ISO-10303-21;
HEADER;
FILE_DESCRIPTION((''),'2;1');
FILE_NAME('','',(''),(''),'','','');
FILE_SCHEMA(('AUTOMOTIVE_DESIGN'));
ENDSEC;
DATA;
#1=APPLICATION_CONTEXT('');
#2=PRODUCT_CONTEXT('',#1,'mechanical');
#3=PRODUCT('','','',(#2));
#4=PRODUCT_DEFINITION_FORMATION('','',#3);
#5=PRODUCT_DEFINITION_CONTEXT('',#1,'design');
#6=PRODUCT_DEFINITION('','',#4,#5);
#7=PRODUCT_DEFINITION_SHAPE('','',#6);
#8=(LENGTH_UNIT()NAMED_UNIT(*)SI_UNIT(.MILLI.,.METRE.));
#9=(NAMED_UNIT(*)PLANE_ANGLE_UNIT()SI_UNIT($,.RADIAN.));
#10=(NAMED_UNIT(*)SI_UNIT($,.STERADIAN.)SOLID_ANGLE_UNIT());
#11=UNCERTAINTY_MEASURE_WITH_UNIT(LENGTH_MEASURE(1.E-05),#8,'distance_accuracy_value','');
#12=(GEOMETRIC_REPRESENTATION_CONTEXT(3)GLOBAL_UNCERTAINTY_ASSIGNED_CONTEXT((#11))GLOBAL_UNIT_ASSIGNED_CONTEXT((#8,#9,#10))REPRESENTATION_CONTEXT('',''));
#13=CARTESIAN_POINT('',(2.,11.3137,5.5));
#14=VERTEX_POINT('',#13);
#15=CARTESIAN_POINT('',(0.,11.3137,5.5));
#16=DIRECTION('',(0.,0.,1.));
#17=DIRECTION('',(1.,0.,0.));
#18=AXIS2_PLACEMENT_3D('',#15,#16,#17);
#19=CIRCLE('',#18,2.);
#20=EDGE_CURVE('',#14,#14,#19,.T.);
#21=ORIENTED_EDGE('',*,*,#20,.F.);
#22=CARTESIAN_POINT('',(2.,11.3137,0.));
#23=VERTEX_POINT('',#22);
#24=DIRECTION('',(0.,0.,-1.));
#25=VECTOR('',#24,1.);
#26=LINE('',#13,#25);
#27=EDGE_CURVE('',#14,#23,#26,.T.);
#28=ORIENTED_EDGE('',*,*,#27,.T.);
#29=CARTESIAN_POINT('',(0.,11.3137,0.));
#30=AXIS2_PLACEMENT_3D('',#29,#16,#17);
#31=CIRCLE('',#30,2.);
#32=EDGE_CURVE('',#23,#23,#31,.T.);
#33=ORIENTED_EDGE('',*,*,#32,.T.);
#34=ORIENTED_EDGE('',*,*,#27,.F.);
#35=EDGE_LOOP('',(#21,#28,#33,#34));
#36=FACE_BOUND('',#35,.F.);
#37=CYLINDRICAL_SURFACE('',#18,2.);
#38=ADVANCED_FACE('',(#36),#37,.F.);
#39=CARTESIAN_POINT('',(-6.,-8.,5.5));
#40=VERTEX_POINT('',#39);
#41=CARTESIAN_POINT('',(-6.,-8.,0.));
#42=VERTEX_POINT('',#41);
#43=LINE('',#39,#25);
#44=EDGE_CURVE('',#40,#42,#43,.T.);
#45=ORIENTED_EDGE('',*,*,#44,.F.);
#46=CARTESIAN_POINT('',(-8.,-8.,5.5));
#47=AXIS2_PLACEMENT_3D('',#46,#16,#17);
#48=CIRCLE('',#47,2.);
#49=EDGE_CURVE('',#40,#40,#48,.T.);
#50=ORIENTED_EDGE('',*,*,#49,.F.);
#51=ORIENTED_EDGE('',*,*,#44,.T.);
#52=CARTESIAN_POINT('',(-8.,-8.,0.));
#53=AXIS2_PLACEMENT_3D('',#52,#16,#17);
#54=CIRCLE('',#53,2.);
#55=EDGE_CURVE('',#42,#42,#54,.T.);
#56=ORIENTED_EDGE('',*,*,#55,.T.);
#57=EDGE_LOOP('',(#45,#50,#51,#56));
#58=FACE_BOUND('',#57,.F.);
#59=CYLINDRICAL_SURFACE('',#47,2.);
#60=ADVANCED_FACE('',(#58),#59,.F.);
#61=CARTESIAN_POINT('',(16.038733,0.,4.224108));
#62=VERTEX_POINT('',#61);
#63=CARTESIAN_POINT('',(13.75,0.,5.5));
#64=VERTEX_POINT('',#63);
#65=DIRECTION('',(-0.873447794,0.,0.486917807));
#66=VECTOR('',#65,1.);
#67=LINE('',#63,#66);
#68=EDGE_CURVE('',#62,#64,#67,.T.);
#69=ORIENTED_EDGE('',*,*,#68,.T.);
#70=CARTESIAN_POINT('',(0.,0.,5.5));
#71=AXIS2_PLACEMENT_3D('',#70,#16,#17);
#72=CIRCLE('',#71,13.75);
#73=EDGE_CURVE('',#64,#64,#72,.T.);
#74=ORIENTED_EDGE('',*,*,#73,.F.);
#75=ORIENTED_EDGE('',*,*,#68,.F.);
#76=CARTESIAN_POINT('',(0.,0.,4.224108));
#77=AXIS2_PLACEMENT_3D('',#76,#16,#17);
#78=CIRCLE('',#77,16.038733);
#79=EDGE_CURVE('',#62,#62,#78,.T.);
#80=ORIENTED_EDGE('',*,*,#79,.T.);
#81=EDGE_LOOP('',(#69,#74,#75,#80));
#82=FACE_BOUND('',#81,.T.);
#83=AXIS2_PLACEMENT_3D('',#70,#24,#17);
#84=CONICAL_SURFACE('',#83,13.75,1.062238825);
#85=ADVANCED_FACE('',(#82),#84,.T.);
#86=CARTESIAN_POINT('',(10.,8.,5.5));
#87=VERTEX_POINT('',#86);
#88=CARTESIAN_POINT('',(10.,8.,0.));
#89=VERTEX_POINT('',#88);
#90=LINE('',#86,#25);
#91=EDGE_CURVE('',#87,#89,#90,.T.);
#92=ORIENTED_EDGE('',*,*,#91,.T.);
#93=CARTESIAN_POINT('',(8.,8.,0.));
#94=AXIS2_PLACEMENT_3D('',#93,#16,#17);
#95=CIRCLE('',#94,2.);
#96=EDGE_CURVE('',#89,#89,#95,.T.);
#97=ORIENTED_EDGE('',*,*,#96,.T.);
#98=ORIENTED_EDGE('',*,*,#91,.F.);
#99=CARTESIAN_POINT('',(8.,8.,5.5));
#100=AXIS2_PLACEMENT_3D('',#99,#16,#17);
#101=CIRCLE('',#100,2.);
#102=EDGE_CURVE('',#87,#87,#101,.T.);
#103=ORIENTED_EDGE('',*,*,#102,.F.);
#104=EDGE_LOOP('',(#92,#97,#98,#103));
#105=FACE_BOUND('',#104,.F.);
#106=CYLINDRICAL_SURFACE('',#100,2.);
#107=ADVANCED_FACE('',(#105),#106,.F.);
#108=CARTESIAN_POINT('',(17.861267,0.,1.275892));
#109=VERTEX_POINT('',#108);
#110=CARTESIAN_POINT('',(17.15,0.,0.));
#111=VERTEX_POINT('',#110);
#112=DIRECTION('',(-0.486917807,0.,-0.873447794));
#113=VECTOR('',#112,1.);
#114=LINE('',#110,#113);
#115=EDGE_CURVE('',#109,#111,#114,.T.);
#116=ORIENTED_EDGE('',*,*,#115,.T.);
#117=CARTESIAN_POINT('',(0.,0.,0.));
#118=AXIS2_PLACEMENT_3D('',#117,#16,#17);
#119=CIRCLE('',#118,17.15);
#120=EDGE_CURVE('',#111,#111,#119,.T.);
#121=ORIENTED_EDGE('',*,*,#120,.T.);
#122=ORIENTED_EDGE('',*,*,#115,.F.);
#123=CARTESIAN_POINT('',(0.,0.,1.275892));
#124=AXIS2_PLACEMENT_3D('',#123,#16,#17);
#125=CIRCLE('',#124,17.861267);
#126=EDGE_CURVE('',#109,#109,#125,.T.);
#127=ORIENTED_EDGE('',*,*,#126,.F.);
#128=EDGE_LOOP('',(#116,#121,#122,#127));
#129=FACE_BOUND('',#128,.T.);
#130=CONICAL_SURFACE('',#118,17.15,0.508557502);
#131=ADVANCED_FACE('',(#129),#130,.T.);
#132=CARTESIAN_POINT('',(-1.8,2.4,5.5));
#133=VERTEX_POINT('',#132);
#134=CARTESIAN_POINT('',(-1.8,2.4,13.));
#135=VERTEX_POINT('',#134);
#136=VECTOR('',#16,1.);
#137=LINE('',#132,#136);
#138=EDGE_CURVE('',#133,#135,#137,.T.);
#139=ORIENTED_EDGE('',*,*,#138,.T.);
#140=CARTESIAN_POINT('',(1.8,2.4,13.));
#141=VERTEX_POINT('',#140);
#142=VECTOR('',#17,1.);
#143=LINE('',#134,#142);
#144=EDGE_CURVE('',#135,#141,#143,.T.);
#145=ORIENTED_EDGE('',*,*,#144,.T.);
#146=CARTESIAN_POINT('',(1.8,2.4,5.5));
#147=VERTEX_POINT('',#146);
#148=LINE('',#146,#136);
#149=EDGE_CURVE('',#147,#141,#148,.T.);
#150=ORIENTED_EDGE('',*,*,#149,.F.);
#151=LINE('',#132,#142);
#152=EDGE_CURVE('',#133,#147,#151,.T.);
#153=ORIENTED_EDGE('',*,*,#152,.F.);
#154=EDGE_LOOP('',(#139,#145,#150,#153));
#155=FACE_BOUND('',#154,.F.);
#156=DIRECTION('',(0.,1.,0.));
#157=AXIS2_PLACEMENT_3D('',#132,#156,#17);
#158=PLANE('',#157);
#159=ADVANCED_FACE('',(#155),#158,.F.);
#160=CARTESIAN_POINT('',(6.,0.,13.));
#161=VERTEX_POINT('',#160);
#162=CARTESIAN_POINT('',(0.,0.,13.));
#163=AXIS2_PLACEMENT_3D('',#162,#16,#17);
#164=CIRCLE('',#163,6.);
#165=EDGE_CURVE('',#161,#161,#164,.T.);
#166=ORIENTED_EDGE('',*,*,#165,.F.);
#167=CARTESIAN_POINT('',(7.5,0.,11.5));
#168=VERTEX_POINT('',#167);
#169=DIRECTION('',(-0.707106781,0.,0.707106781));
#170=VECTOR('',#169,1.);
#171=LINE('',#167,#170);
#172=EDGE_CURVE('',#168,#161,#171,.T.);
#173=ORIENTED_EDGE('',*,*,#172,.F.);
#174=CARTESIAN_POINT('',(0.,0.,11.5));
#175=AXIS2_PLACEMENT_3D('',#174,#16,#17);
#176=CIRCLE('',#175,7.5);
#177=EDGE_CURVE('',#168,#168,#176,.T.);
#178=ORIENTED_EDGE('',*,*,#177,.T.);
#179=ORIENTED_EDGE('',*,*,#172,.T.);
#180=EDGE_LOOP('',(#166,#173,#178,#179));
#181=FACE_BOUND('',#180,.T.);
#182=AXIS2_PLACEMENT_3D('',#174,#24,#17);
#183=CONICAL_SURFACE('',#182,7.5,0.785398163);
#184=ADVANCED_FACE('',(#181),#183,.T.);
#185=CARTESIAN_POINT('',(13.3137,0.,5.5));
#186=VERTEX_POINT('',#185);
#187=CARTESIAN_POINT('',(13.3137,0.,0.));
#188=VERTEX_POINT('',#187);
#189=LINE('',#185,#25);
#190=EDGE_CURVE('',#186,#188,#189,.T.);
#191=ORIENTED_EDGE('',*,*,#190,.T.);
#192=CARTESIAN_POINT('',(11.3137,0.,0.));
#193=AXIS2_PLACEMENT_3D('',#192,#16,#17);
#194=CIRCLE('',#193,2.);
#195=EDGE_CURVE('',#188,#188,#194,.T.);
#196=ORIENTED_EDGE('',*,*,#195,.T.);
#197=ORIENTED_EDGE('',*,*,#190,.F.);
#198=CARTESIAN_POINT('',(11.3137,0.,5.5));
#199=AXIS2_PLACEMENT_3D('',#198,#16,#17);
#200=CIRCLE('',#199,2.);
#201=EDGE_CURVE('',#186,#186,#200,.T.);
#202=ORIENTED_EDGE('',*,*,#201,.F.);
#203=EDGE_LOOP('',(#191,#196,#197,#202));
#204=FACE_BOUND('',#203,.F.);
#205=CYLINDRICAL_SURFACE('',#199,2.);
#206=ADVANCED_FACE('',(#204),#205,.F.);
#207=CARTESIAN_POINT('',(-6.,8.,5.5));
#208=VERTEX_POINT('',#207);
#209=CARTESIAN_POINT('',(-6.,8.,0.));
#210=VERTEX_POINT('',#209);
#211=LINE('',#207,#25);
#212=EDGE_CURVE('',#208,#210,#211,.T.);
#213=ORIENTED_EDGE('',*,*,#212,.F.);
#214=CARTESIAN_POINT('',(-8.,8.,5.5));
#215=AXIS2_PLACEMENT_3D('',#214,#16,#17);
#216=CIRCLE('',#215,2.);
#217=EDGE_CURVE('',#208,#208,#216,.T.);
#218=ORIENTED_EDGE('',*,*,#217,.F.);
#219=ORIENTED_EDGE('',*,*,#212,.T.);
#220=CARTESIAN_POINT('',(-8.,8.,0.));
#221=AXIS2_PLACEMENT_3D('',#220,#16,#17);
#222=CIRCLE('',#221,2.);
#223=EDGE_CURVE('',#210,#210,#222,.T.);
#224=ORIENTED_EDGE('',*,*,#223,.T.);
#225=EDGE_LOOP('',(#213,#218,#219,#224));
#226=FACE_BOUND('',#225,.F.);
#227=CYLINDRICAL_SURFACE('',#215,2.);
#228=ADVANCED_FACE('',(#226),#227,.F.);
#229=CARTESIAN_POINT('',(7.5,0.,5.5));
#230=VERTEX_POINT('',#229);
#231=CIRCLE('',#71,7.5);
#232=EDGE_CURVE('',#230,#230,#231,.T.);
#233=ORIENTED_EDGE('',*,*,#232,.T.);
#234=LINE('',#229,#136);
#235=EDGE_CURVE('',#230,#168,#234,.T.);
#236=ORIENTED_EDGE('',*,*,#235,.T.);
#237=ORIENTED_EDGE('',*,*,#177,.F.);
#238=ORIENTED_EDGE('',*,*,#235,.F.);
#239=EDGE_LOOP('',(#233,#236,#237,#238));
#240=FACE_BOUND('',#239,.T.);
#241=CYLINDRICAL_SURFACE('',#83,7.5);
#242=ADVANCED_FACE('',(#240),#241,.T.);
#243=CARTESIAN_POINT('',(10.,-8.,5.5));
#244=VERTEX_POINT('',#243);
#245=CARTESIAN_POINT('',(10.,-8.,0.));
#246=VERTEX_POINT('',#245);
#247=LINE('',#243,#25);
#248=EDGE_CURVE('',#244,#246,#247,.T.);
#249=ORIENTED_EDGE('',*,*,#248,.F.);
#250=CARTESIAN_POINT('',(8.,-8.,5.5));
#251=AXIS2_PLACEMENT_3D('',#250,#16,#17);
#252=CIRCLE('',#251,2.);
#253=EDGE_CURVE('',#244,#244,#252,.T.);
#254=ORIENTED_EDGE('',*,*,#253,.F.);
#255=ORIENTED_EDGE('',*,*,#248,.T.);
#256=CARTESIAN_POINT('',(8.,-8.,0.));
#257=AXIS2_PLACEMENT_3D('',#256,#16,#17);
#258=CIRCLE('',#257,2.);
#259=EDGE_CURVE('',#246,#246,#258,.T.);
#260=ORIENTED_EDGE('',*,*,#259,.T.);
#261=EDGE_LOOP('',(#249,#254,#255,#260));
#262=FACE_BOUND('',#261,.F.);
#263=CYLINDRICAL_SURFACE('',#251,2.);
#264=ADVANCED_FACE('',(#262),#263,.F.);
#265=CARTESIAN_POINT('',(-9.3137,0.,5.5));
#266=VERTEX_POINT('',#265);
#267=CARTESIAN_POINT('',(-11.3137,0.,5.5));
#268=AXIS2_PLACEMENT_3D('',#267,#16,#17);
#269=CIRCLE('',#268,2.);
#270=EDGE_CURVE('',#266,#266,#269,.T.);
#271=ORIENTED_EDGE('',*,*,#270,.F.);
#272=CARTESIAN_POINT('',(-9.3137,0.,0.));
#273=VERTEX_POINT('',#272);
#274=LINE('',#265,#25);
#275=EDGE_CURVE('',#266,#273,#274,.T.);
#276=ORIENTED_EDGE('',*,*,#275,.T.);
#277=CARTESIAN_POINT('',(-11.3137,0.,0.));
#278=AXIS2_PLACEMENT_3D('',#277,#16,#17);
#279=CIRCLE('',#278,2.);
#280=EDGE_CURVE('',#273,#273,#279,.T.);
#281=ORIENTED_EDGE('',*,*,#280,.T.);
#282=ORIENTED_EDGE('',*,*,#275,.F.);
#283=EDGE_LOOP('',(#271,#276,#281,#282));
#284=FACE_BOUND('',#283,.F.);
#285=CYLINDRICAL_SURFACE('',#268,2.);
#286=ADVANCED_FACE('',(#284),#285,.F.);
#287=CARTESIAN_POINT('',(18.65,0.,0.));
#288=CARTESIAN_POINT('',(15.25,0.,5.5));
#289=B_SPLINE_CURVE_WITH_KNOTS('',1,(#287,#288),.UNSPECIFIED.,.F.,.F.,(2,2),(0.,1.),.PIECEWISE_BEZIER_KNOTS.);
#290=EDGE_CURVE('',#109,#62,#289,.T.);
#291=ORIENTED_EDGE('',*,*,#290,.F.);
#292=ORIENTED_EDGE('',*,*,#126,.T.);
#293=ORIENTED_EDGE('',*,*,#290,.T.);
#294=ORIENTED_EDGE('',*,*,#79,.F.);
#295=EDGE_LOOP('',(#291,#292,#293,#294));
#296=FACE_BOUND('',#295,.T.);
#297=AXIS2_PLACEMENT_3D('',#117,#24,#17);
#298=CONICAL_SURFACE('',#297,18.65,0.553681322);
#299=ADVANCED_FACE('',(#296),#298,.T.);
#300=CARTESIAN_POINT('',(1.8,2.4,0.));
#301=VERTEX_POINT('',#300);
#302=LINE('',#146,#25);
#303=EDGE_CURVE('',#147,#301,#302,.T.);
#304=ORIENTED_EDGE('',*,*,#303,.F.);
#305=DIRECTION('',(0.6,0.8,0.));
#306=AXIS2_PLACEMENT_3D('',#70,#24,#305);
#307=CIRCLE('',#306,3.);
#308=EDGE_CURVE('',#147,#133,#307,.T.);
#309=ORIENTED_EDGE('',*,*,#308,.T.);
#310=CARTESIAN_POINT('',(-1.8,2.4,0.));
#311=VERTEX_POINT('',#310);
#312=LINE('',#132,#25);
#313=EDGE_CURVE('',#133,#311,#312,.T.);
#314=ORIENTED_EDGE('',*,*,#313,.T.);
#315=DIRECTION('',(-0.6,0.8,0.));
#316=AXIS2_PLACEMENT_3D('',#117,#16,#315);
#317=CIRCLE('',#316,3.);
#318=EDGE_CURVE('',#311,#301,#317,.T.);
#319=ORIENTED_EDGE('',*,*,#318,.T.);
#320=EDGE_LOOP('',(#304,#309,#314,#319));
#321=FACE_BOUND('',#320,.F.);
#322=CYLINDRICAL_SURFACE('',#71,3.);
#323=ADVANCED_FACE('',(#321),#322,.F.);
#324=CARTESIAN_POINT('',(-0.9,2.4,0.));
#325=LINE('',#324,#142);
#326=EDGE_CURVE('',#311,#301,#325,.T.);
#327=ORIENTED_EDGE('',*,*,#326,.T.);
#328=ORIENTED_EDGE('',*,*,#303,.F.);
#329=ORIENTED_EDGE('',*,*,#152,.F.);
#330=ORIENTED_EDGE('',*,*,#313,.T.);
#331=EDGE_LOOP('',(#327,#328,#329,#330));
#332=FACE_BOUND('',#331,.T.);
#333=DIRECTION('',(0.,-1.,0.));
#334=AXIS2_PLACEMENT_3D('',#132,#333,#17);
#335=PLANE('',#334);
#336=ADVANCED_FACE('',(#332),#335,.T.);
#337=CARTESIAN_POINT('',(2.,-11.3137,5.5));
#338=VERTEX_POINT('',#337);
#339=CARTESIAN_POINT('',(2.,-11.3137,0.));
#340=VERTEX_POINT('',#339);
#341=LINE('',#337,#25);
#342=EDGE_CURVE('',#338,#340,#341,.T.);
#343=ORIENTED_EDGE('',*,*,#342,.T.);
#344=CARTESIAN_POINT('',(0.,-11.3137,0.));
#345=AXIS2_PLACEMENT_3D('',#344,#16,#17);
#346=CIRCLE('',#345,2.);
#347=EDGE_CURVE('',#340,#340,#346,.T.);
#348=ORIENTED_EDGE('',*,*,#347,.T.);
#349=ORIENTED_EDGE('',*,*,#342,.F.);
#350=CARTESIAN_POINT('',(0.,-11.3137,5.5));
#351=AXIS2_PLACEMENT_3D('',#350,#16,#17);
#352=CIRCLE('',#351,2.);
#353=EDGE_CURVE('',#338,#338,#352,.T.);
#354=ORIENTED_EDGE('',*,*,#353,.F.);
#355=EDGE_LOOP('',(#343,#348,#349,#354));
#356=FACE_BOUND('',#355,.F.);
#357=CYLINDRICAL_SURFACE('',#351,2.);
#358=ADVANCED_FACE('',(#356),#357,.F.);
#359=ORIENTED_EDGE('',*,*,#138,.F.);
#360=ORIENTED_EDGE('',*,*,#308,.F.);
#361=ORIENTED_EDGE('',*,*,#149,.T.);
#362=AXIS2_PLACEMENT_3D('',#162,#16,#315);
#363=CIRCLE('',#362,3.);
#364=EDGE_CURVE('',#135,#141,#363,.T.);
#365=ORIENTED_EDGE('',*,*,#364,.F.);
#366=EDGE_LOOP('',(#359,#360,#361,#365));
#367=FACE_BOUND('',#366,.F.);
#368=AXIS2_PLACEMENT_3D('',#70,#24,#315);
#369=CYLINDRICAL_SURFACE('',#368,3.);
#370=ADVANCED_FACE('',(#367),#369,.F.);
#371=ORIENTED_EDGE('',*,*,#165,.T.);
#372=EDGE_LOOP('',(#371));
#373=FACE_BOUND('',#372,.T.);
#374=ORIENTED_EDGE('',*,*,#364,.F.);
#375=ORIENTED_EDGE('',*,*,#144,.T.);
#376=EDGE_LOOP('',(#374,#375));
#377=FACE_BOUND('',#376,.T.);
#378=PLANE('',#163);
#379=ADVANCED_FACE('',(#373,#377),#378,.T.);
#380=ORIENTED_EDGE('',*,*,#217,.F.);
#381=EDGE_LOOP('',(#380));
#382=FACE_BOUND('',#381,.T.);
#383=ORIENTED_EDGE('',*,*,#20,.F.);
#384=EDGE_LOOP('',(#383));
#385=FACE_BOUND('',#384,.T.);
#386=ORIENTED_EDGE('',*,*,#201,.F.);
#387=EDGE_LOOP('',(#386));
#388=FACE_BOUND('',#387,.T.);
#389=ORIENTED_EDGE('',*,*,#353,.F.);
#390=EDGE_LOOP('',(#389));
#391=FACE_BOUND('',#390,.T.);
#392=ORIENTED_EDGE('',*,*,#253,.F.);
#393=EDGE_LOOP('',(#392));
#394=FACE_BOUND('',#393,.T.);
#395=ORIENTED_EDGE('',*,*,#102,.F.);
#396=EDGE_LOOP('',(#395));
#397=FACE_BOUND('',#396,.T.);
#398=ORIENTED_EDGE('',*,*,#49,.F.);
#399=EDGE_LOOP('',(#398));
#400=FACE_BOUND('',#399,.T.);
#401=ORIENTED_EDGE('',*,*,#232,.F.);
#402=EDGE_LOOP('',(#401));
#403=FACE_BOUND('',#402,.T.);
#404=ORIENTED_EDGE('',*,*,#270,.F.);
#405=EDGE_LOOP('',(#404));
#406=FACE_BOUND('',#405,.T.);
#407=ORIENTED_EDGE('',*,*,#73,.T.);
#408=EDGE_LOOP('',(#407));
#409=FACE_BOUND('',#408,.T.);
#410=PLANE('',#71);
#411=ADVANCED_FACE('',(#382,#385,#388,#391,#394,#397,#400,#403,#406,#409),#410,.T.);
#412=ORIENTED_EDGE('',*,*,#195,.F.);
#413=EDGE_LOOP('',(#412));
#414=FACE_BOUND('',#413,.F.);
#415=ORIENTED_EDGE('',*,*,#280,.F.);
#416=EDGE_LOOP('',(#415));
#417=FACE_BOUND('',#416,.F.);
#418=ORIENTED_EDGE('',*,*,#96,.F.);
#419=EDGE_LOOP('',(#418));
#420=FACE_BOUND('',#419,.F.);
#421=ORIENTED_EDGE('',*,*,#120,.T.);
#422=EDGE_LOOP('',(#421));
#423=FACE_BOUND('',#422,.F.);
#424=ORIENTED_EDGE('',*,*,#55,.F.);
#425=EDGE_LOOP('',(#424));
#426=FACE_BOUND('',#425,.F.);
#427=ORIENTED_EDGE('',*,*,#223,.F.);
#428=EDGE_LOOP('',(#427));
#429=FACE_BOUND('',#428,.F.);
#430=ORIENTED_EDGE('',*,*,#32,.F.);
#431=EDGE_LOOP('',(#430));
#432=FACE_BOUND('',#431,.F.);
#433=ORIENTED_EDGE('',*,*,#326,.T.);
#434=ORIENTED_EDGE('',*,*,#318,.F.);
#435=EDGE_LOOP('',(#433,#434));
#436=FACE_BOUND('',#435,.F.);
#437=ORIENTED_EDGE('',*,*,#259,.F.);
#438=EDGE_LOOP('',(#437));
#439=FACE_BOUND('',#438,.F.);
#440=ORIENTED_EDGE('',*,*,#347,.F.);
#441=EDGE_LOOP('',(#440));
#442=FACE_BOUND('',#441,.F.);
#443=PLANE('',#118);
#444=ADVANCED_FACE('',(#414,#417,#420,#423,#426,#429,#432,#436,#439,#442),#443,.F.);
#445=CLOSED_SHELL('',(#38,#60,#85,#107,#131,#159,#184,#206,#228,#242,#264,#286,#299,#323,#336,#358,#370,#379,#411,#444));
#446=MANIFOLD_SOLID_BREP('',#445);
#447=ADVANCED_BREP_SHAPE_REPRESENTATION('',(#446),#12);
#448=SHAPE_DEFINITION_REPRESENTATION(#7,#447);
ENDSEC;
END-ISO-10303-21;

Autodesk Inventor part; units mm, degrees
ref_plane "YZ Plane" through (0, 0, 0) normal (1, 0, 0) x (0, 1, 0)
ref_plane "XZ Plane" through (0, 0, 0) normal (0, 1, 0) x (-1, 0, 0)
sketch "Sketch1" plane through (0, 0, 0) normal (0, 0, 1) x (1, 0, 0)
  circle A0 centre (0, 0) radius 18.65
  dimension "d0" = 37.3
ref_plane "Work Plane1" through (0, 0, 5.5) normal (0, 0, 1) x (1, 0, 0)
sketch "Sketch2" plane through (0, 0, 5.5) normal (0, 0, 1) x (1, 0, 0)
  circle A0 centre (0, 0) radius 15.25
  dimension "d2" = 30.5
loft "Loft1" add profiles "Sketch1", "Sketch2"
sketch "Sketch3" plane through (0, 0, 5.5) normal (0, 0, 1) x (1, 0, 0)
  circle A0 centre (0, 0) radius 3
  line L0 (0, 0) -> (0, -3) construction
  line L1 (-1.8, 2.4) -> (1.8, 2.4)
  dimension "d7" = 6
  dimension "d8" = 5.4
extrude "Extrusion1" cut sketch "Sketch3" against normal through all contours A0 L1 picked at (0.3021, 0.4498)
chamfer "Chamfer1" distance 1.5 angle 45 1 edges at (-18.65, 0, 0)
chamfer "Chamfer2" distance 1.5 angle 45 1 edges at (-15.25, 0, 5.5)
sketch "Sketch4" plane through (0, 0, 5.5) normal (0, 0, 1) x (1, 0, 0)
  circle A0 centre (0, 0) radius 7.5
  arc A1 (-1.8, 2.4) -> (1.8, 2.4) centre (0, 0) ccw projected
  line L0 (-1.8, 2.4) -> (1.8, 2.4) projected
  dimension "d17" = 15
extrude "Extrusion2" add sketch "Sketch4" along normal blind 7.5
chamfer "Chamfer3" distance 1.5 angle 45 1 edges at (-7.5, 0, 13)
sketch "Sketch5" plane through (0, 0, 5.5) normal (0, 0, 1) x (1, 0, 0)
  circle A0 centre (0, 11.3137) radius 2
  circle A1 centre (-8, 8) radius 2
  circle A2 centre (-8, -8) radius 2
  line L0 (-8, 8) -> (-8, -8) construction
  circle A3 centre (0, 0) radius 17.8613 projected
  line L1 (-17.8613, 0) -> (0, 0) construction
  circle A4 centre (-11.3137, 0) radius 2
  circle A5 centre (0, 0) radius 11.3137 construction
  line L2 (0, 0) -> (0, 17.8613) construction
  circle A6 centre (0, -11.3137) radius 2
  circle A7 centre (0, 0) radius 7.5 projected
  line L3 (0, 0) -> (0, -17.8613) construction
  circle A8 centre (8, 8) radius 2
  circle A9 centre (8, -8) radius 2
  circle A10 centre (11.3137, 0) radius 2
  point P0 (-8, 0)
  dimension "d23" = 4
  dimension "d24" = 16
  dimension "d25" = 16
extrude "Extrusion3" cut sketch "Sketch5" against normal through all contours A0 | A1 | A2 | A4 | A6 | A8 | A9 | A10
properties part number "ShoulderMiterGear" material "Aluminum 6061"
